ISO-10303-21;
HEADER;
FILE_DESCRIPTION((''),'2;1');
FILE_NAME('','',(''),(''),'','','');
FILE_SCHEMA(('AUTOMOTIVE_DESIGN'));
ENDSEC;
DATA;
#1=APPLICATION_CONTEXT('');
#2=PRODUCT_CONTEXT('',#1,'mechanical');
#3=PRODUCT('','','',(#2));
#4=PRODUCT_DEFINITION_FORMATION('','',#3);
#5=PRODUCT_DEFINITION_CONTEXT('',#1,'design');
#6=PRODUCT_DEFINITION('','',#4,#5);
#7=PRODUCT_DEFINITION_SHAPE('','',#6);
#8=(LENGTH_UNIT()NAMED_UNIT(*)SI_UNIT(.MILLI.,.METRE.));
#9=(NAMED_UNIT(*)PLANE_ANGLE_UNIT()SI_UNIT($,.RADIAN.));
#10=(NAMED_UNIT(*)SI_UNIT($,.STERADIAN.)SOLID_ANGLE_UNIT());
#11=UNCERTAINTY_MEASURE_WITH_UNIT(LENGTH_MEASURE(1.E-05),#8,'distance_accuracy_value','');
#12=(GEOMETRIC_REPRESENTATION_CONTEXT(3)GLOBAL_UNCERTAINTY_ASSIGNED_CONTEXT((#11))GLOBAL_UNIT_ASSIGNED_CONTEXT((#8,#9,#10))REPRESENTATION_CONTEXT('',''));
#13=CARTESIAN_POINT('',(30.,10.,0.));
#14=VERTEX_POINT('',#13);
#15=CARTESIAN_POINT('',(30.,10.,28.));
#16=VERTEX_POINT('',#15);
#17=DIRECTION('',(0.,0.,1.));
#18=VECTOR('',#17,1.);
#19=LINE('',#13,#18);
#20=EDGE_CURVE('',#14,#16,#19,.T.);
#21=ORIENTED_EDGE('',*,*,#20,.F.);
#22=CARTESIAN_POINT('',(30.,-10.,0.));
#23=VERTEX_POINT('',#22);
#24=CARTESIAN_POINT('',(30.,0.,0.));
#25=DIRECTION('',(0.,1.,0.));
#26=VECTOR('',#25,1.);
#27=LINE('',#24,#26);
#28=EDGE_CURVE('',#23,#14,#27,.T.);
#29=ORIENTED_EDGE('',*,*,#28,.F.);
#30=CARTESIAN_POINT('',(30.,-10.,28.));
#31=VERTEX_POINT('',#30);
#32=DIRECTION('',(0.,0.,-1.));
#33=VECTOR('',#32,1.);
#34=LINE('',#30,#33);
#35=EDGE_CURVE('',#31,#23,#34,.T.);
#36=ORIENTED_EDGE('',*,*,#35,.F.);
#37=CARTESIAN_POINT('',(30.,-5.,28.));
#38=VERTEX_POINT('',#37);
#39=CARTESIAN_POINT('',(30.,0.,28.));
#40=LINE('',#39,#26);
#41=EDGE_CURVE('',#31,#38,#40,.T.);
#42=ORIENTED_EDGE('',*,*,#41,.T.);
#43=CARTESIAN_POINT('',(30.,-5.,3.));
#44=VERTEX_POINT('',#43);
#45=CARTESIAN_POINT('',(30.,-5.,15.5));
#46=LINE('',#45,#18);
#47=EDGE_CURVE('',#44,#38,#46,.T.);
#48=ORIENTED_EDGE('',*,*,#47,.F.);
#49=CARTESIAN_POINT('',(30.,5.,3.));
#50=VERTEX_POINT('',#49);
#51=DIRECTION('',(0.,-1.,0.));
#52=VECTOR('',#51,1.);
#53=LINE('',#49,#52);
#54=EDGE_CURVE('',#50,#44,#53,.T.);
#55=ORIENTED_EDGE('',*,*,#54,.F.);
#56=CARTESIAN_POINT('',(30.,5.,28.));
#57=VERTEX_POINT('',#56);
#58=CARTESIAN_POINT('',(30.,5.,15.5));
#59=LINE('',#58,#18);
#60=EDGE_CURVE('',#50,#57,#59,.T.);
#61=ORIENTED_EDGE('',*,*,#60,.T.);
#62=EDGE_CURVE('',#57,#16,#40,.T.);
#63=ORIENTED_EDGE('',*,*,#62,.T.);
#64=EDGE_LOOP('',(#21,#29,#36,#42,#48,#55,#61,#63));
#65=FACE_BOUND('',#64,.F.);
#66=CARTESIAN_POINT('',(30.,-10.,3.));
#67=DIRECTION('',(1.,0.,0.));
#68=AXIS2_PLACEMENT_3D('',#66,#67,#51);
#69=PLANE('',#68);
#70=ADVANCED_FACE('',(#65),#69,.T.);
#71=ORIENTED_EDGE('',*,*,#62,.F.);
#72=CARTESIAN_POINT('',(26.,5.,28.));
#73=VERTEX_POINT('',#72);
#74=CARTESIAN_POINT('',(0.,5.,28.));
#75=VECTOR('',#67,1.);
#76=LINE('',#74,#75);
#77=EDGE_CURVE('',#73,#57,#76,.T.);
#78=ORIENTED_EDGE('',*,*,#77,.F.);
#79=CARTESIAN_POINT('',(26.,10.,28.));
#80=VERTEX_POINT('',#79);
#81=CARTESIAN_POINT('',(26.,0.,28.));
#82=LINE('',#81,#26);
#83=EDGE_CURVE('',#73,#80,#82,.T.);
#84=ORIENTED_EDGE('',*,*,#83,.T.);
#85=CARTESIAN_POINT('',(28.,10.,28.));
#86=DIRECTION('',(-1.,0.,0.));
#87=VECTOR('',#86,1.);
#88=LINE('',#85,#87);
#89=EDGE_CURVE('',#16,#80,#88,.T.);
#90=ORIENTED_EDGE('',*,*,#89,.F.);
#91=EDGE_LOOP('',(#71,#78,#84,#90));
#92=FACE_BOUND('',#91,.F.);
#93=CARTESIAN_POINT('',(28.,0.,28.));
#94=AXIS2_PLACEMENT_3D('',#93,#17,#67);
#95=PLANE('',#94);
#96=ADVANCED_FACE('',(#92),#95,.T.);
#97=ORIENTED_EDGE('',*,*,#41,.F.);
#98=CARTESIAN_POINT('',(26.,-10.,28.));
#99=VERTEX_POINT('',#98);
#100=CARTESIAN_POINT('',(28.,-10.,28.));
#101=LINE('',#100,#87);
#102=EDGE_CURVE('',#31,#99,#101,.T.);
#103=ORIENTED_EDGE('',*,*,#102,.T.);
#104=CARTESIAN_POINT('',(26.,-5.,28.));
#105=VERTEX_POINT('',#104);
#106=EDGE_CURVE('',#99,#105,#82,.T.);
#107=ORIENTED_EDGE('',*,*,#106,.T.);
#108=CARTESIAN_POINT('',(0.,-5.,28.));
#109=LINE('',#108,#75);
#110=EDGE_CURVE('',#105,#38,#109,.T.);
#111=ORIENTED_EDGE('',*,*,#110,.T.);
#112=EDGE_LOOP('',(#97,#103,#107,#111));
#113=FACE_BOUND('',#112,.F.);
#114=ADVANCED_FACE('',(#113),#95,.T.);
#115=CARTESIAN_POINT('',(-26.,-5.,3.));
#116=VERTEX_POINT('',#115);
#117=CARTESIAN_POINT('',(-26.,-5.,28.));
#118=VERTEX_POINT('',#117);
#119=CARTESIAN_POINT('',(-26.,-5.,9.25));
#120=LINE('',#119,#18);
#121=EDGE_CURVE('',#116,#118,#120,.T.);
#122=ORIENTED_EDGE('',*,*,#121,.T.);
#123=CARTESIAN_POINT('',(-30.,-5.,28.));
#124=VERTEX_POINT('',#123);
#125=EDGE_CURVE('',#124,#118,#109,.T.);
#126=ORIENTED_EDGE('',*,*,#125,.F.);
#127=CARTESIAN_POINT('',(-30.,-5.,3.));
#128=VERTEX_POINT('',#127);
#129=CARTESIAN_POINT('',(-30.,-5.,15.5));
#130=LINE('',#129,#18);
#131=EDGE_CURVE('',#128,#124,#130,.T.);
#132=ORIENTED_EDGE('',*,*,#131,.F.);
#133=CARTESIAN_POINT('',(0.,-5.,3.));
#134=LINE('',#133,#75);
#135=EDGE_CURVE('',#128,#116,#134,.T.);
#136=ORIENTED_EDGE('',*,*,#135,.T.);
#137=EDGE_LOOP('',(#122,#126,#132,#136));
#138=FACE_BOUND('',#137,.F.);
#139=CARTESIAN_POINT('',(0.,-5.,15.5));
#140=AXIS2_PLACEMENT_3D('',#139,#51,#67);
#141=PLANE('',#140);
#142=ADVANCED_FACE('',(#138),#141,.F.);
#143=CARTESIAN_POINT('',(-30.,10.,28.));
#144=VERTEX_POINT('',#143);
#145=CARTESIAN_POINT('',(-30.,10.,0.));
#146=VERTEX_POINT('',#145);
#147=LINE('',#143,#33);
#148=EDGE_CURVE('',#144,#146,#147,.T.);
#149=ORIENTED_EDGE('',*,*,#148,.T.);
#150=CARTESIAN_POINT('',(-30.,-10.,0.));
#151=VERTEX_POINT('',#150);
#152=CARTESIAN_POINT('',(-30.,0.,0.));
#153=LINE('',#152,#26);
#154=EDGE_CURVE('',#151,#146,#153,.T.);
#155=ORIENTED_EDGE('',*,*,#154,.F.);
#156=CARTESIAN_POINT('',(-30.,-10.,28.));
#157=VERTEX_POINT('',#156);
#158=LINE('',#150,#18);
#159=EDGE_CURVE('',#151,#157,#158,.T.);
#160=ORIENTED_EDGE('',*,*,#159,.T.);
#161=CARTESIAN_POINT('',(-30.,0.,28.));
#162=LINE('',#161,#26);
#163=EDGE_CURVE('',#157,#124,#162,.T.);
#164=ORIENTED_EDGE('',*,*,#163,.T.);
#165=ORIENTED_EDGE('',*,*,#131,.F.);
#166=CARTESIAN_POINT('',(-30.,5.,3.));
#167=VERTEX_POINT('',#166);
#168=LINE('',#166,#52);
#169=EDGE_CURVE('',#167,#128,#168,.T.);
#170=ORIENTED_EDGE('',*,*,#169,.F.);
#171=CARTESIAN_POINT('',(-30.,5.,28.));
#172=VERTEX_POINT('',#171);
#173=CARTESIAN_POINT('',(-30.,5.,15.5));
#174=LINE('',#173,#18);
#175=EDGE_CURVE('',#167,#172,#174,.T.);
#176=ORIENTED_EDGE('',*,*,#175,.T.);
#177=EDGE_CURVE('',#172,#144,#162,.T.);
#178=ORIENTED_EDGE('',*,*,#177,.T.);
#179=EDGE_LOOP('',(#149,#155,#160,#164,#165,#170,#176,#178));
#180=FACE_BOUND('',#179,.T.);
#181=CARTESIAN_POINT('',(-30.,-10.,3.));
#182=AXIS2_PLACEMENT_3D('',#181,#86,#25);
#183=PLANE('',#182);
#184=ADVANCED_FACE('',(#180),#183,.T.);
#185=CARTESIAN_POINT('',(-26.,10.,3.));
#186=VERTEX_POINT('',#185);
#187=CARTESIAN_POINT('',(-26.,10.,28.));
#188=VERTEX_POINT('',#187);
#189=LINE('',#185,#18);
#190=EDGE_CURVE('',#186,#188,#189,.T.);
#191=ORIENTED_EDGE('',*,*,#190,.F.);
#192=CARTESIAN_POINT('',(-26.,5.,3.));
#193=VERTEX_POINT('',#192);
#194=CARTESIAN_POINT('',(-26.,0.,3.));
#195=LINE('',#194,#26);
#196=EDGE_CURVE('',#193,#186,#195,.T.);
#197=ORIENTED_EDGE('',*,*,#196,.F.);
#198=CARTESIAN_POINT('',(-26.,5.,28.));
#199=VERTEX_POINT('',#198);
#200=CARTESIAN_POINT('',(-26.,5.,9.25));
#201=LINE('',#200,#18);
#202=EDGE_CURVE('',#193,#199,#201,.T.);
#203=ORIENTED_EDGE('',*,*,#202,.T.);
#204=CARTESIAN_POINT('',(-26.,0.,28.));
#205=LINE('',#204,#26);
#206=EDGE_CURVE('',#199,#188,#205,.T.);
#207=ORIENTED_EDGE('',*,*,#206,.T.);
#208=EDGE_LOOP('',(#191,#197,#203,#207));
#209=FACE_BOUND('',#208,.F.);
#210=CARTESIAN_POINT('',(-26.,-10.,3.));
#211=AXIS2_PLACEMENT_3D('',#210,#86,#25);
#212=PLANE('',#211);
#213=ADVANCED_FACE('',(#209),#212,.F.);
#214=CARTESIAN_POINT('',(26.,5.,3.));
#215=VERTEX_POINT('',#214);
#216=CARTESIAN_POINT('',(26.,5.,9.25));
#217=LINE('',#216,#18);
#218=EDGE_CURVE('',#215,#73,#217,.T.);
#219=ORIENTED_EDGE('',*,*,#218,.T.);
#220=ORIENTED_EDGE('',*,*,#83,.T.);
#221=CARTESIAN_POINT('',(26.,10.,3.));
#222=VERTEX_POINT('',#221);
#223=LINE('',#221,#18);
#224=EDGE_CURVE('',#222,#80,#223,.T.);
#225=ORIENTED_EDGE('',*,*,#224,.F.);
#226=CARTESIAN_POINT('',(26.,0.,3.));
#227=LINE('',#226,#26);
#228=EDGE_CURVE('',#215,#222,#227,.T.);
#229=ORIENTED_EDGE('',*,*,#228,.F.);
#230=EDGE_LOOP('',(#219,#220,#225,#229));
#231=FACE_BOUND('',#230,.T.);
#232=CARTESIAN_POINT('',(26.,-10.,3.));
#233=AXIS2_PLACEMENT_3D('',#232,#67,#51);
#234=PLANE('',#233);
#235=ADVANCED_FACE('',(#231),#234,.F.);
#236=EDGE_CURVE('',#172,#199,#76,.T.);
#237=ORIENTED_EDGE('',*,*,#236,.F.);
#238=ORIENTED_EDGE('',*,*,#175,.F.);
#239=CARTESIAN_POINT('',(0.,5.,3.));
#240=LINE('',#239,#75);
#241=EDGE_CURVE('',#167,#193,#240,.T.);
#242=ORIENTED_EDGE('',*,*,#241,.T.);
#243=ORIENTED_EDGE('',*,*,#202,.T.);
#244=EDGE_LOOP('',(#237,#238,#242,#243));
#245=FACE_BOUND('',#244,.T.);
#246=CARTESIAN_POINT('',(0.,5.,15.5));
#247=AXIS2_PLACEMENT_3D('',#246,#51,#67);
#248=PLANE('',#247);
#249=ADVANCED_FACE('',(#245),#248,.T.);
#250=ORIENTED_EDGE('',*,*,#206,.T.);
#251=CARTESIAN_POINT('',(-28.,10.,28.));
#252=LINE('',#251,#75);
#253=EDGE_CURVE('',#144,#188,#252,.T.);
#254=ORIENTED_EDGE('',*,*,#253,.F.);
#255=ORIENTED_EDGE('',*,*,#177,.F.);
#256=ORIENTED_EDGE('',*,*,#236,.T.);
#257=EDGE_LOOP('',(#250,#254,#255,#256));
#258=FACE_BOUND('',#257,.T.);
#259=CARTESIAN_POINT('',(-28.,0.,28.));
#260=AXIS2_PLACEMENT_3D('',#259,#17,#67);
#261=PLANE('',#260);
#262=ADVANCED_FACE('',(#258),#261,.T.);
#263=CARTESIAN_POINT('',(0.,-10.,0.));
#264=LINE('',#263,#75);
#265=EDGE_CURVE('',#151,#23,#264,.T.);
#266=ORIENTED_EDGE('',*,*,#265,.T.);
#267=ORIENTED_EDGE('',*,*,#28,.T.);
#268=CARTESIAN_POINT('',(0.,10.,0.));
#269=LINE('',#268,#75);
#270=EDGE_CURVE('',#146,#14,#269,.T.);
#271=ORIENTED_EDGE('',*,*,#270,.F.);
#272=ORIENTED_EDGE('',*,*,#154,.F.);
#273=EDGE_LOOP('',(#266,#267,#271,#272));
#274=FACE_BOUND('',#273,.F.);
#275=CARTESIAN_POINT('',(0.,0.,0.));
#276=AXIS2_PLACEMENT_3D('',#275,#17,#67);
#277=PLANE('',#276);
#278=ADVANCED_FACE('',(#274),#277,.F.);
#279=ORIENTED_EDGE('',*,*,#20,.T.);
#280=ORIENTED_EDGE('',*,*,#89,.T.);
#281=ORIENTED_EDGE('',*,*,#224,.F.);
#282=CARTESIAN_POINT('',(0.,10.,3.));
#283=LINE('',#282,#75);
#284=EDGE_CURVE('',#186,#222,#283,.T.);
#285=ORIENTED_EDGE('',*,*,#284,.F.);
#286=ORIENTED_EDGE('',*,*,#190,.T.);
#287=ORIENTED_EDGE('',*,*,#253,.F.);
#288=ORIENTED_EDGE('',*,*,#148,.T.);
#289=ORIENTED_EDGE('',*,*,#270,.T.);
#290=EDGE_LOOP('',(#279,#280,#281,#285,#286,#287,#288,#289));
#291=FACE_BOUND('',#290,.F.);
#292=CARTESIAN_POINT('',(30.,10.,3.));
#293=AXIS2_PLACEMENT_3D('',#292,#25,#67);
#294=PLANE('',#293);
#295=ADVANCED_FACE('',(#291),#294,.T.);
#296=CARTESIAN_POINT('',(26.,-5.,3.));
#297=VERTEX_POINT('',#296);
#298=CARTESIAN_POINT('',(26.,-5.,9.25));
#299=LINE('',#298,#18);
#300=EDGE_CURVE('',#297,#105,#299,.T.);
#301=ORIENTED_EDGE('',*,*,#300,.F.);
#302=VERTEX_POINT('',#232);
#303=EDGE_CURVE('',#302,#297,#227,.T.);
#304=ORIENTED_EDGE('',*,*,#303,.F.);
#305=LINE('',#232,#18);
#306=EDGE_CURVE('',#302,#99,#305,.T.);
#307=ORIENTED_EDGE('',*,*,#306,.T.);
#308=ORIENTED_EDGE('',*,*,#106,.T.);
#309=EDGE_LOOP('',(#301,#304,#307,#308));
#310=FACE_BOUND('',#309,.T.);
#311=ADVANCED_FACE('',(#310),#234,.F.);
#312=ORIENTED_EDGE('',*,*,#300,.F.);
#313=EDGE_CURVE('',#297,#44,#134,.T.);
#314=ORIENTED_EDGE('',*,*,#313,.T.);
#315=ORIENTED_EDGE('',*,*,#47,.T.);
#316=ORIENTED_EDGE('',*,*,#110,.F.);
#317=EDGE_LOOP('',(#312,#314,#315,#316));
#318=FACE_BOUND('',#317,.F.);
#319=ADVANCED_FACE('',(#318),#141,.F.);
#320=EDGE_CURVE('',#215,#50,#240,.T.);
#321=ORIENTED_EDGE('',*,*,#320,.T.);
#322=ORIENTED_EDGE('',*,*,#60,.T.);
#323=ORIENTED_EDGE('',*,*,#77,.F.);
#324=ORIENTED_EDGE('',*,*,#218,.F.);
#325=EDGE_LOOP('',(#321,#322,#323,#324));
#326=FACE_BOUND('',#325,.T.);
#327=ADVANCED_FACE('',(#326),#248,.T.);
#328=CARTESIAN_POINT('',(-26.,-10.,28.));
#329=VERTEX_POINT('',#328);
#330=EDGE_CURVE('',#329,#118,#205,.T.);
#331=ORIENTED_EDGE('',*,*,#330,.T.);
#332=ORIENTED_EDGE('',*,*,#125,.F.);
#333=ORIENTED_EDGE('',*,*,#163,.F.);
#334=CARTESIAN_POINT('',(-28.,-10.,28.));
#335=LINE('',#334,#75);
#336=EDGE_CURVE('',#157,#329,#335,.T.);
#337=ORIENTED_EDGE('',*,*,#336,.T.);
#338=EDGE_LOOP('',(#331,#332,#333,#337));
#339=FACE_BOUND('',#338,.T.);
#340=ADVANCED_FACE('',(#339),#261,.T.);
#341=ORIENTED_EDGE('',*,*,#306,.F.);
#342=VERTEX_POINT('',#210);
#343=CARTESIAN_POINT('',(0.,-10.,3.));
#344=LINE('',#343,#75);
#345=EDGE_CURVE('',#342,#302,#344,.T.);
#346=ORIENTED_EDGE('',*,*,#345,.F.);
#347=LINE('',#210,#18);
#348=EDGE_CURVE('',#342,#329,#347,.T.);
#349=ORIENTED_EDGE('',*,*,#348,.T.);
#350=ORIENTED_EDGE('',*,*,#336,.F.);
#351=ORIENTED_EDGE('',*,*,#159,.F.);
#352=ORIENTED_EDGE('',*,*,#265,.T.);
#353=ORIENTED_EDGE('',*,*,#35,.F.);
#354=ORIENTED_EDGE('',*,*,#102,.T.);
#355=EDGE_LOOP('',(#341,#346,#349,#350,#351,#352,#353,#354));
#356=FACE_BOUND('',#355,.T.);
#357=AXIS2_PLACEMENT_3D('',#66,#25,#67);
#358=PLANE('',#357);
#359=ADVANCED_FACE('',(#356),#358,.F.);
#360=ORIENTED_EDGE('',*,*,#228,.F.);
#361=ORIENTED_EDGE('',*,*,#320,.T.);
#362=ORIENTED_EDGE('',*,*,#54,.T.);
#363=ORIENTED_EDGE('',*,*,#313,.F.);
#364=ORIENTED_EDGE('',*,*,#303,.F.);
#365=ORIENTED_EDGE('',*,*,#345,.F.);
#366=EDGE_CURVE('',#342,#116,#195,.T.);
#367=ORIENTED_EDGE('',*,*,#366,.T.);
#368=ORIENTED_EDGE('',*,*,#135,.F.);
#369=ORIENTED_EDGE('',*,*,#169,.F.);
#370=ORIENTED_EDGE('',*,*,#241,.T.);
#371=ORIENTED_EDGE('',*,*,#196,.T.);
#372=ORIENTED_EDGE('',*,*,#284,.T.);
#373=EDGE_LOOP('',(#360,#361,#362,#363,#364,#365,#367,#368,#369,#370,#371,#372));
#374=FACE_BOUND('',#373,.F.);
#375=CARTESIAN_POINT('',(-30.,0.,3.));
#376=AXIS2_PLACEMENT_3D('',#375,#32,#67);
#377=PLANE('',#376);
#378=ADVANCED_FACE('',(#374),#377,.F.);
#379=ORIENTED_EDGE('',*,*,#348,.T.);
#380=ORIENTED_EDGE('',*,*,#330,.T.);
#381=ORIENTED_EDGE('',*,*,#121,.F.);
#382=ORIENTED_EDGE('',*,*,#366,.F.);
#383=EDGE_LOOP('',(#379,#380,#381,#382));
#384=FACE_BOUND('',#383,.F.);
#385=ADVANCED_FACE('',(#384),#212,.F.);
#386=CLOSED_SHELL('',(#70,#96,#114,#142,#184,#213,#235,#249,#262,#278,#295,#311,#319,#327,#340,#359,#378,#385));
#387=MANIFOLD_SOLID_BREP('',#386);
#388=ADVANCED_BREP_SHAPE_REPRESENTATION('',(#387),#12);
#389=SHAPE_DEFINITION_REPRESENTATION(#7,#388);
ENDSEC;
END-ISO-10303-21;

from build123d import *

# Parameters (mm, degrees)
F0_W     = 60
F0_H     = 20
F1_DEPTH = 3
F2_W     = 4
F2_H     = 20
F3_DEPTH = 25
F4_W     = 60
F4_H     = 25
F5_DEPTH = 5


# Not quite as in the source:
# - a pattern or mirror of a feature is missing from the dataset's text; its kind, count and spacing are read off the source's solid


with BuildPart() as f1:
    # F0 (on Top) → F1 (new body)
    with BuildSketch(Plane.XY):
        Rectangle(F0_W, F0_H)
    extrude(amount=F1_DEPTH)

    # F2 (on face) → F3 (join)
    with BuildSketch(Plane.XY.offset(3)):
        with Locations((-28, 0)):
            Rectangle(F2_W, F2_H)
    f3 = extrude(amount=F3_DEPTH)

    # F3_copies: F3 across plane
    add(f3.mirror(Plane(origin=(0, 0, 0), x_dir=(0, 0, 1), z_dir=(1, 0, 0))))

    # F4 (on Front) → F5 (cut, symmetric)
    with BuildSketch(Plane.XZ):
        with Locations((0, 15.5)):
            Rectangle(F4_W, F4_H)
    extrude(amount=F5_DEPTH, both=True, mode=Mode.SUBTRACT)


solid = f1.part
